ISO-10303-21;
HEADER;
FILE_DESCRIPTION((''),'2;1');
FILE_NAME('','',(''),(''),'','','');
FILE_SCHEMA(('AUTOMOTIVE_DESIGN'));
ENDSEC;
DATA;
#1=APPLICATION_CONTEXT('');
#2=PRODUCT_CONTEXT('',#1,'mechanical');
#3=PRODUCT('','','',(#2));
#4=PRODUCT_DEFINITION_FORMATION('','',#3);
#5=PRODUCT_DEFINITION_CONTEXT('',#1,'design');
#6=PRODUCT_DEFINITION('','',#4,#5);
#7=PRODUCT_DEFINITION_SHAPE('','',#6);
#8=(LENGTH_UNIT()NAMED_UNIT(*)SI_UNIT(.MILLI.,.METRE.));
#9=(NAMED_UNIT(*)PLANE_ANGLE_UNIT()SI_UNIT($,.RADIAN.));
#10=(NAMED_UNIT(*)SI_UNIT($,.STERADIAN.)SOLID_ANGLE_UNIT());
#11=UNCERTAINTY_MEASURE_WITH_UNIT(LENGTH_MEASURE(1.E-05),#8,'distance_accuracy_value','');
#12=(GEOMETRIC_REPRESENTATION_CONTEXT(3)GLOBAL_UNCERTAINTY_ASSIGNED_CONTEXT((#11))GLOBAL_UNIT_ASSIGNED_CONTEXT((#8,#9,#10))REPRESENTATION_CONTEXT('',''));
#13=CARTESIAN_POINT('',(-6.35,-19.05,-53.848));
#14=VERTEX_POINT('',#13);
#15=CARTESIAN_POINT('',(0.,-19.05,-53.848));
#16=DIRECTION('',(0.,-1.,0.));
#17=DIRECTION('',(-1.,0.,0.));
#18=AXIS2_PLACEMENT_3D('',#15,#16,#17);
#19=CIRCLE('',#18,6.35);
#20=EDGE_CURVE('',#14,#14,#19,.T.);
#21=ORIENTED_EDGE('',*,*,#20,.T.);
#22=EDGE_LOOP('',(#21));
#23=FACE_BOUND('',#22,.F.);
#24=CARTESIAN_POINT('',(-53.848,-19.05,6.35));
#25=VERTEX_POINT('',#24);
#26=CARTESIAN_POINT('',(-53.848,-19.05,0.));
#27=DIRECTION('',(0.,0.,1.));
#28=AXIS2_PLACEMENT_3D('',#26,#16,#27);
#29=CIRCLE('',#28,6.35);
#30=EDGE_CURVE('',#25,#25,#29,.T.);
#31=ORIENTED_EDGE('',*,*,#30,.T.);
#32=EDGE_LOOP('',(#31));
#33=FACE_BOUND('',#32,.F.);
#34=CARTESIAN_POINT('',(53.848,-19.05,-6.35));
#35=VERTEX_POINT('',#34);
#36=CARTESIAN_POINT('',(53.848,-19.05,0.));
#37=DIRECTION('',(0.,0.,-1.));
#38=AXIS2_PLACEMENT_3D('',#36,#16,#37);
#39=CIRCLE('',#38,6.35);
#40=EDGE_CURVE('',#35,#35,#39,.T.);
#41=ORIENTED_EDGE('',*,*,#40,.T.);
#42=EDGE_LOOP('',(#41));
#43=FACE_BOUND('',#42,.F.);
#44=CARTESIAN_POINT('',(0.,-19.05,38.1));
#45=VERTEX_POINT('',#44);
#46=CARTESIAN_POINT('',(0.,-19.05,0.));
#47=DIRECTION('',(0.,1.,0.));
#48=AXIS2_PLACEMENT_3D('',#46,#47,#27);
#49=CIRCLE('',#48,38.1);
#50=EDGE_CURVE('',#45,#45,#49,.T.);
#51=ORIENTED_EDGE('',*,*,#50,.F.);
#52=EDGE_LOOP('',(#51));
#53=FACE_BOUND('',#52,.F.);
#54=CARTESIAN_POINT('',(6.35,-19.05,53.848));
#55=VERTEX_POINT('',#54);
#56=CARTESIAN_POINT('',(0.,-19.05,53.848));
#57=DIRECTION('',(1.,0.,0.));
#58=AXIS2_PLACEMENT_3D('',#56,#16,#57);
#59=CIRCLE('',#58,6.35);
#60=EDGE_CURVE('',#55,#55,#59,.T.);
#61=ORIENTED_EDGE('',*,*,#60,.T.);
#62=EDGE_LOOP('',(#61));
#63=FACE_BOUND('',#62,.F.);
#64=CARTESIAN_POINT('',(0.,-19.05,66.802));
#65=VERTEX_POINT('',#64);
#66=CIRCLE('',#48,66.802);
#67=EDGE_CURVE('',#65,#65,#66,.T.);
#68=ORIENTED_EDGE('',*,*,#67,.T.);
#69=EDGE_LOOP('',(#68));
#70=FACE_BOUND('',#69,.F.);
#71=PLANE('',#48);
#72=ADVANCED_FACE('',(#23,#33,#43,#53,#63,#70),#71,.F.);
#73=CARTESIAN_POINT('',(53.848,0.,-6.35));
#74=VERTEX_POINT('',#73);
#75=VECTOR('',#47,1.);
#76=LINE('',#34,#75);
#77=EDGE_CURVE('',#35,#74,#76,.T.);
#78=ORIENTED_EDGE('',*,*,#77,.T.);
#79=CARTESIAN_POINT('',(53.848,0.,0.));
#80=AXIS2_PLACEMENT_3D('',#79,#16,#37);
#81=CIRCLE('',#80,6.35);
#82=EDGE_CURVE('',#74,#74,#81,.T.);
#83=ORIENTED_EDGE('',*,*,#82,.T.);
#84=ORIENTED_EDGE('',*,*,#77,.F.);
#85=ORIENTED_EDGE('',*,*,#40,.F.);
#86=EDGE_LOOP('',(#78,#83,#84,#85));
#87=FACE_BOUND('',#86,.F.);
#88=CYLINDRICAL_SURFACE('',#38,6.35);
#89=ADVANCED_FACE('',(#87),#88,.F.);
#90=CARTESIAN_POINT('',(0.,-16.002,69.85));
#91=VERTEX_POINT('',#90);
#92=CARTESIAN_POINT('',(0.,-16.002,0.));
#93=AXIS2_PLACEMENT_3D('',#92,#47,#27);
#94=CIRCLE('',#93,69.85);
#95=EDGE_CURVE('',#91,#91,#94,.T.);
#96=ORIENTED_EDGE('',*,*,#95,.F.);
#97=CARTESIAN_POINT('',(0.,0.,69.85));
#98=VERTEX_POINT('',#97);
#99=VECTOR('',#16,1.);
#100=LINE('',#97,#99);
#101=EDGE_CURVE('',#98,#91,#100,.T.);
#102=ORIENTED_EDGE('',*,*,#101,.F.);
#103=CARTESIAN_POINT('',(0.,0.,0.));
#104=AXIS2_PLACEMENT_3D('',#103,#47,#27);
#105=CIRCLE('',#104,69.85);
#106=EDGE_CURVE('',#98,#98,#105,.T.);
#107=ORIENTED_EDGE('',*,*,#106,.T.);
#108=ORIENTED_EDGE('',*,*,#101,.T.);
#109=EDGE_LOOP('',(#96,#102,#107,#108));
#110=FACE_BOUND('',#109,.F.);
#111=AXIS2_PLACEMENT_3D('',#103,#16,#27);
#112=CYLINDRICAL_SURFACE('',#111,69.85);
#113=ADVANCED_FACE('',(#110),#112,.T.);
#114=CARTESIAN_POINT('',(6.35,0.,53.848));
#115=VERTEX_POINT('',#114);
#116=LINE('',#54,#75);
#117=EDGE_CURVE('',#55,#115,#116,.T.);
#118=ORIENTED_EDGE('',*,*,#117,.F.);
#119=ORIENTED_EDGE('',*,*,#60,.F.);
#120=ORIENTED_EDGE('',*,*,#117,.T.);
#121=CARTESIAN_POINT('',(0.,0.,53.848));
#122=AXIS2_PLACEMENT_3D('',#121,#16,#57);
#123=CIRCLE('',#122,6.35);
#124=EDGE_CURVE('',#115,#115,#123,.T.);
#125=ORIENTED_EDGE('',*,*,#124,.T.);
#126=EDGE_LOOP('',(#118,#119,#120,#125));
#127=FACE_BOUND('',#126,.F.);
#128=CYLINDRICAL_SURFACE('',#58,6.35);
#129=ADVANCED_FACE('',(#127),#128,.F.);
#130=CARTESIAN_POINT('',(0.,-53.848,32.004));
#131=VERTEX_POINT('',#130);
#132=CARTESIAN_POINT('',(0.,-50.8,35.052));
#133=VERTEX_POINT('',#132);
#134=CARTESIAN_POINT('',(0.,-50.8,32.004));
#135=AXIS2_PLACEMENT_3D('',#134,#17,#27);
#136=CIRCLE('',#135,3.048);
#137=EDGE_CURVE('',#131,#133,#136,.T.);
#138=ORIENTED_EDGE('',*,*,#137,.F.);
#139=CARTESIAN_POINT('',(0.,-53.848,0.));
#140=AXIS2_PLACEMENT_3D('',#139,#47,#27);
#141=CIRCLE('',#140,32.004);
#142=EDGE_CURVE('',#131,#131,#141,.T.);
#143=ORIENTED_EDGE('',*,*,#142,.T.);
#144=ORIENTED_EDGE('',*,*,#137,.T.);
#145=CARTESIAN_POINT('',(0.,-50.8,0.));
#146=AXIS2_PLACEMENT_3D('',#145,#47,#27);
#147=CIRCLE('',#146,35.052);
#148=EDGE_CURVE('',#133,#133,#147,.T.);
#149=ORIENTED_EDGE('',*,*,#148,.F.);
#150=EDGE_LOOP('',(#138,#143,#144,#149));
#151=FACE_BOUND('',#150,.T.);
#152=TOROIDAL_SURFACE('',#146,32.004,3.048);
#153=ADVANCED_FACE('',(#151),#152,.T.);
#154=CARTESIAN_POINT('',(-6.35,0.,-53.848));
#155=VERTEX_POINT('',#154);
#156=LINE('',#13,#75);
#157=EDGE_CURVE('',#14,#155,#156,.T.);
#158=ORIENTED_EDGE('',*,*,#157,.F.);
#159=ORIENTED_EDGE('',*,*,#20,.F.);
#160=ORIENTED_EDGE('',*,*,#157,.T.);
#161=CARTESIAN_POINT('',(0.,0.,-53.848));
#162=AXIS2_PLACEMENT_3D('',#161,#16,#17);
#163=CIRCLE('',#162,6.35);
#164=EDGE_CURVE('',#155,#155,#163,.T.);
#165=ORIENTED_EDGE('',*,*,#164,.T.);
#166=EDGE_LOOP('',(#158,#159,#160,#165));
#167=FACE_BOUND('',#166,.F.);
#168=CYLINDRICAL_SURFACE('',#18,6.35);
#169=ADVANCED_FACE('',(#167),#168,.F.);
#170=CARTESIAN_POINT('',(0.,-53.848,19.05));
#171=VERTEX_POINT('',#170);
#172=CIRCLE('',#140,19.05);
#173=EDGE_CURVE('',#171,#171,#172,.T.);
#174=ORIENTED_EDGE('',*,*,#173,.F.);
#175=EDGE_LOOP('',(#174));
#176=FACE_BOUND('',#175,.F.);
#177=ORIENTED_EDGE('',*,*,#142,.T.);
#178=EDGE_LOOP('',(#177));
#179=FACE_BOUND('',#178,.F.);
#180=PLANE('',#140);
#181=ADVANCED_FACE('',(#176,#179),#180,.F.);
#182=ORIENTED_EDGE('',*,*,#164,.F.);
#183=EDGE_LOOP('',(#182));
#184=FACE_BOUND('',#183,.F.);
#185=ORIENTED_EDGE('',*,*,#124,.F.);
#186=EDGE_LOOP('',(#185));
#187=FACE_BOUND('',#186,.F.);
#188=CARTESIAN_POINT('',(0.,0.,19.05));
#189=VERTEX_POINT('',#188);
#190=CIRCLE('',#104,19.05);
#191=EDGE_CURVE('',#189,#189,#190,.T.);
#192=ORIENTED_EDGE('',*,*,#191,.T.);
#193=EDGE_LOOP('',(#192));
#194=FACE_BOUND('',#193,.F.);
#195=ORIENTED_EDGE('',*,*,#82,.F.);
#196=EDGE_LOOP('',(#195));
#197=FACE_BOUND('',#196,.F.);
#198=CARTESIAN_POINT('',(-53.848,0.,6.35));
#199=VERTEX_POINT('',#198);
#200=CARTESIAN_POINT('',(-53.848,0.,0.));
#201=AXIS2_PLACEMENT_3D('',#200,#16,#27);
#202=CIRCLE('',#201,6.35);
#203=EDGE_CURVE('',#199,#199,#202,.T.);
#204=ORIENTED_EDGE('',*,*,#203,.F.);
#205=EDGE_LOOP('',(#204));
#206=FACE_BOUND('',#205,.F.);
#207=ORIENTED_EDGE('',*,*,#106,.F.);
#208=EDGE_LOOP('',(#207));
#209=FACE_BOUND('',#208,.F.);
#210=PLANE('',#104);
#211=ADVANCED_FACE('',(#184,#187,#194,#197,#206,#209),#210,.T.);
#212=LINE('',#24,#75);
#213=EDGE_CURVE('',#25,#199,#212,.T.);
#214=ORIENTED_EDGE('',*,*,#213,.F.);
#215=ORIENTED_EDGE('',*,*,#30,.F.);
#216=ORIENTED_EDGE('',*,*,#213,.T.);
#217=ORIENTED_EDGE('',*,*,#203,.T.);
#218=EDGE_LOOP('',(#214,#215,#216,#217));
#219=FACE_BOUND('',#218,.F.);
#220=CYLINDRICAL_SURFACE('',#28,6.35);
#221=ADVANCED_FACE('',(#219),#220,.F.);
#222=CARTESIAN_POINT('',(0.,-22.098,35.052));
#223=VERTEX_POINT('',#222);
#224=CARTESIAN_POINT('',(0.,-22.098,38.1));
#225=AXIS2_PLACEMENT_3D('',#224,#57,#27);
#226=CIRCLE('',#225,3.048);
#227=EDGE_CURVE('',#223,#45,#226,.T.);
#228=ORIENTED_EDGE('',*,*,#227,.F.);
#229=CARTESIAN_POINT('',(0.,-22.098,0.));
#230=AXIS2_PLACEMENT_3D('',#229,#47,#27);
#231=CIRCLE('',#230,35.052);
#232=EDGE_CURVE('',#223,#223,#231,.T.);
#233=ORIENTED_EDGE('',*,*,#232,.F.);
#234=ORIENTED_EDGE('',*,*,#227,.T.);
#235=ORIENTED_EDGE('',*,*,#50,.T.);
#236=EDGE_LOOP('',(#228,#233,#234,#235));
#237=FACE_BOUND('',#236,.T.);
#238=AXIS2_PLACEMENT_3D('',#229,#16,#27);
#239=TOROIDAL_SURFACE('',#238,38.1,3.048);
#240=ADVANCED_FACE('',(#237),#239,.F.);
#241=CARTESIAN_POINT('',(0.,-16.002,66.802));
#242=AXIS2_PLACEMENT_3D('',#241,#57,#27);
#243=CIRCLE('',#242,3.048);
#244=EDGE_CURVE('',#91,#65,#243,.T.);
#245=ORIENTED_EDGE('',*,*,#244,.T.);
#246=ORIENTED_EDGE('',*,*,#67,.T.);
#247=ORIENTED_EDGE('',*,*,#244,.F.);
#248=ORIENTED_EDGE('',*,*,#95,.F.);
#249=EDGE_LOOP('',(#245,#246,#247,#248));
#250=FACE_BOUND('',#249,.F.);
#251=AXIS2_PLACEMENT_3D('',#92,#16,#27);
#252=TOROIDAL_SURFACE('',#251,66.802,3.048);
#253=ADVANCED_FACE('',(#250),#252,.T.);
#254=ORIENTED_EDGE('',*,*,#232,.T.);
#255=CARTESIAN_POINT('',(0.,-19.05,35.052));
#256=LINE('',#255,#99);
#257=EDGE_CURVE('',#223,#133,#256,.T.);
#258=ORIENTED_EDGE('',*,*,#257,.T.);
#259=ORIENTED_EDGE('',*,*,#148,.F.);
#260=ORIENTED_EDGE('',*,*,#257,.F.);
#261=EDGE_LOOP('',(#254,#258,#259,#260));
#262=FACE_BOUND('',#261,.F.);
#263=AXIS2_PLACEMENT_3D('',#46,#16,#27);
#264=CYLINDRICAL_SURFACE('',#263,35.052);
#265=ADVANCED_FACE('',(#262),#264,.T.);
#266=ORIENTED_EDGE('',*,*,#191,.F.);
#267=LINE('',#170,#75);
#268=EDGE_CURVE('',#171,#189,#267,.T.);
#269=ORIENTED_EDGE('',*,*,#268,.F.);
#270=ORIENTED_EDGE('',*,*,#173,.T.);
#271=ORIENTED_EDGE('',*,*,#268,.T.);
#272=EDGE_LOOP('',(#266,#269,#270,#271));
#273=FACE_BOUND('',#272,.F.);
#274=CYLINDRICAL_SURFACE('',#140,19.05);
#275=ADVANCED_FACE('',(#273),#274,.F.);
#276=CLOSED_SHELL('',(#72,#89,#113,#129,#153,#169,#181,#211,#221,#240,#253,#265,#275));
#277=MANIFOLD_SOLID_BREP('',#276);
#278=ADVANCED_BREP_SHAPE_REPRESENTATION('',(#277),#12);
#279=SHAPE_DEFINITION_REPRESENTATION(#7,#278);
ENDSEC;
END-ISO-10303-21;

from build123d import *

# Parameters (mm, degrees)
F2_R            = 6.35
F3_DEPTH        = 19.051
F3_COPIES_COUNT = 4
F4_R            = 3.048


# Not quite as in the source:
# - a pattern or mirror of a feature is missing from the dataset's text; its kind, count and spacing are read off the source's solid


with BuildPart() as f1:
    # F0 (on Right) → F1 (revolve)
    with BuildSketch(Plane.YZ):
        Polygon((-53.848, 19.05), (0, 19.05), (0, 69.85), (-19.05, 69.85), (-19.05, 35.052), (-53.848, 35.052), align=None)
    revolve(axis=Axis((0, -0.6338636002, 0), (0, 1, 0)))

    # F2 (on face) → F3 (cut, through all)
    with BuildSketch(Plane.XZ.offset(19.05)):
        with Locations((0, 53.848)):
            Circle(F2_R)
    f3 = extrude(amount=-F3_DEPTH, mode=Mode.SUBTRACT)

    # F3_copies: F3 ×4 about axis
    f3_copies_axis = Axis((0, 0, 0), (0, 1, 0))
    for i in range(1, F3_COPIES_COUNT):
        add(f3.rotate(f3_copies_axis, i * 360 / F3_COPIES_COUNT), mode=Mode.SUBTRACT)

    # F4
    f4_edges = [f1.edges().sort_by_distance(p)[0] for p in [
        (0, -19.05, -69.85),
        (0, -53.848, -35.052),
        (0, -19.05, -35.052),
    ]]
    fillet(f4_edges, radius=F4_R)


solid = f1.part
